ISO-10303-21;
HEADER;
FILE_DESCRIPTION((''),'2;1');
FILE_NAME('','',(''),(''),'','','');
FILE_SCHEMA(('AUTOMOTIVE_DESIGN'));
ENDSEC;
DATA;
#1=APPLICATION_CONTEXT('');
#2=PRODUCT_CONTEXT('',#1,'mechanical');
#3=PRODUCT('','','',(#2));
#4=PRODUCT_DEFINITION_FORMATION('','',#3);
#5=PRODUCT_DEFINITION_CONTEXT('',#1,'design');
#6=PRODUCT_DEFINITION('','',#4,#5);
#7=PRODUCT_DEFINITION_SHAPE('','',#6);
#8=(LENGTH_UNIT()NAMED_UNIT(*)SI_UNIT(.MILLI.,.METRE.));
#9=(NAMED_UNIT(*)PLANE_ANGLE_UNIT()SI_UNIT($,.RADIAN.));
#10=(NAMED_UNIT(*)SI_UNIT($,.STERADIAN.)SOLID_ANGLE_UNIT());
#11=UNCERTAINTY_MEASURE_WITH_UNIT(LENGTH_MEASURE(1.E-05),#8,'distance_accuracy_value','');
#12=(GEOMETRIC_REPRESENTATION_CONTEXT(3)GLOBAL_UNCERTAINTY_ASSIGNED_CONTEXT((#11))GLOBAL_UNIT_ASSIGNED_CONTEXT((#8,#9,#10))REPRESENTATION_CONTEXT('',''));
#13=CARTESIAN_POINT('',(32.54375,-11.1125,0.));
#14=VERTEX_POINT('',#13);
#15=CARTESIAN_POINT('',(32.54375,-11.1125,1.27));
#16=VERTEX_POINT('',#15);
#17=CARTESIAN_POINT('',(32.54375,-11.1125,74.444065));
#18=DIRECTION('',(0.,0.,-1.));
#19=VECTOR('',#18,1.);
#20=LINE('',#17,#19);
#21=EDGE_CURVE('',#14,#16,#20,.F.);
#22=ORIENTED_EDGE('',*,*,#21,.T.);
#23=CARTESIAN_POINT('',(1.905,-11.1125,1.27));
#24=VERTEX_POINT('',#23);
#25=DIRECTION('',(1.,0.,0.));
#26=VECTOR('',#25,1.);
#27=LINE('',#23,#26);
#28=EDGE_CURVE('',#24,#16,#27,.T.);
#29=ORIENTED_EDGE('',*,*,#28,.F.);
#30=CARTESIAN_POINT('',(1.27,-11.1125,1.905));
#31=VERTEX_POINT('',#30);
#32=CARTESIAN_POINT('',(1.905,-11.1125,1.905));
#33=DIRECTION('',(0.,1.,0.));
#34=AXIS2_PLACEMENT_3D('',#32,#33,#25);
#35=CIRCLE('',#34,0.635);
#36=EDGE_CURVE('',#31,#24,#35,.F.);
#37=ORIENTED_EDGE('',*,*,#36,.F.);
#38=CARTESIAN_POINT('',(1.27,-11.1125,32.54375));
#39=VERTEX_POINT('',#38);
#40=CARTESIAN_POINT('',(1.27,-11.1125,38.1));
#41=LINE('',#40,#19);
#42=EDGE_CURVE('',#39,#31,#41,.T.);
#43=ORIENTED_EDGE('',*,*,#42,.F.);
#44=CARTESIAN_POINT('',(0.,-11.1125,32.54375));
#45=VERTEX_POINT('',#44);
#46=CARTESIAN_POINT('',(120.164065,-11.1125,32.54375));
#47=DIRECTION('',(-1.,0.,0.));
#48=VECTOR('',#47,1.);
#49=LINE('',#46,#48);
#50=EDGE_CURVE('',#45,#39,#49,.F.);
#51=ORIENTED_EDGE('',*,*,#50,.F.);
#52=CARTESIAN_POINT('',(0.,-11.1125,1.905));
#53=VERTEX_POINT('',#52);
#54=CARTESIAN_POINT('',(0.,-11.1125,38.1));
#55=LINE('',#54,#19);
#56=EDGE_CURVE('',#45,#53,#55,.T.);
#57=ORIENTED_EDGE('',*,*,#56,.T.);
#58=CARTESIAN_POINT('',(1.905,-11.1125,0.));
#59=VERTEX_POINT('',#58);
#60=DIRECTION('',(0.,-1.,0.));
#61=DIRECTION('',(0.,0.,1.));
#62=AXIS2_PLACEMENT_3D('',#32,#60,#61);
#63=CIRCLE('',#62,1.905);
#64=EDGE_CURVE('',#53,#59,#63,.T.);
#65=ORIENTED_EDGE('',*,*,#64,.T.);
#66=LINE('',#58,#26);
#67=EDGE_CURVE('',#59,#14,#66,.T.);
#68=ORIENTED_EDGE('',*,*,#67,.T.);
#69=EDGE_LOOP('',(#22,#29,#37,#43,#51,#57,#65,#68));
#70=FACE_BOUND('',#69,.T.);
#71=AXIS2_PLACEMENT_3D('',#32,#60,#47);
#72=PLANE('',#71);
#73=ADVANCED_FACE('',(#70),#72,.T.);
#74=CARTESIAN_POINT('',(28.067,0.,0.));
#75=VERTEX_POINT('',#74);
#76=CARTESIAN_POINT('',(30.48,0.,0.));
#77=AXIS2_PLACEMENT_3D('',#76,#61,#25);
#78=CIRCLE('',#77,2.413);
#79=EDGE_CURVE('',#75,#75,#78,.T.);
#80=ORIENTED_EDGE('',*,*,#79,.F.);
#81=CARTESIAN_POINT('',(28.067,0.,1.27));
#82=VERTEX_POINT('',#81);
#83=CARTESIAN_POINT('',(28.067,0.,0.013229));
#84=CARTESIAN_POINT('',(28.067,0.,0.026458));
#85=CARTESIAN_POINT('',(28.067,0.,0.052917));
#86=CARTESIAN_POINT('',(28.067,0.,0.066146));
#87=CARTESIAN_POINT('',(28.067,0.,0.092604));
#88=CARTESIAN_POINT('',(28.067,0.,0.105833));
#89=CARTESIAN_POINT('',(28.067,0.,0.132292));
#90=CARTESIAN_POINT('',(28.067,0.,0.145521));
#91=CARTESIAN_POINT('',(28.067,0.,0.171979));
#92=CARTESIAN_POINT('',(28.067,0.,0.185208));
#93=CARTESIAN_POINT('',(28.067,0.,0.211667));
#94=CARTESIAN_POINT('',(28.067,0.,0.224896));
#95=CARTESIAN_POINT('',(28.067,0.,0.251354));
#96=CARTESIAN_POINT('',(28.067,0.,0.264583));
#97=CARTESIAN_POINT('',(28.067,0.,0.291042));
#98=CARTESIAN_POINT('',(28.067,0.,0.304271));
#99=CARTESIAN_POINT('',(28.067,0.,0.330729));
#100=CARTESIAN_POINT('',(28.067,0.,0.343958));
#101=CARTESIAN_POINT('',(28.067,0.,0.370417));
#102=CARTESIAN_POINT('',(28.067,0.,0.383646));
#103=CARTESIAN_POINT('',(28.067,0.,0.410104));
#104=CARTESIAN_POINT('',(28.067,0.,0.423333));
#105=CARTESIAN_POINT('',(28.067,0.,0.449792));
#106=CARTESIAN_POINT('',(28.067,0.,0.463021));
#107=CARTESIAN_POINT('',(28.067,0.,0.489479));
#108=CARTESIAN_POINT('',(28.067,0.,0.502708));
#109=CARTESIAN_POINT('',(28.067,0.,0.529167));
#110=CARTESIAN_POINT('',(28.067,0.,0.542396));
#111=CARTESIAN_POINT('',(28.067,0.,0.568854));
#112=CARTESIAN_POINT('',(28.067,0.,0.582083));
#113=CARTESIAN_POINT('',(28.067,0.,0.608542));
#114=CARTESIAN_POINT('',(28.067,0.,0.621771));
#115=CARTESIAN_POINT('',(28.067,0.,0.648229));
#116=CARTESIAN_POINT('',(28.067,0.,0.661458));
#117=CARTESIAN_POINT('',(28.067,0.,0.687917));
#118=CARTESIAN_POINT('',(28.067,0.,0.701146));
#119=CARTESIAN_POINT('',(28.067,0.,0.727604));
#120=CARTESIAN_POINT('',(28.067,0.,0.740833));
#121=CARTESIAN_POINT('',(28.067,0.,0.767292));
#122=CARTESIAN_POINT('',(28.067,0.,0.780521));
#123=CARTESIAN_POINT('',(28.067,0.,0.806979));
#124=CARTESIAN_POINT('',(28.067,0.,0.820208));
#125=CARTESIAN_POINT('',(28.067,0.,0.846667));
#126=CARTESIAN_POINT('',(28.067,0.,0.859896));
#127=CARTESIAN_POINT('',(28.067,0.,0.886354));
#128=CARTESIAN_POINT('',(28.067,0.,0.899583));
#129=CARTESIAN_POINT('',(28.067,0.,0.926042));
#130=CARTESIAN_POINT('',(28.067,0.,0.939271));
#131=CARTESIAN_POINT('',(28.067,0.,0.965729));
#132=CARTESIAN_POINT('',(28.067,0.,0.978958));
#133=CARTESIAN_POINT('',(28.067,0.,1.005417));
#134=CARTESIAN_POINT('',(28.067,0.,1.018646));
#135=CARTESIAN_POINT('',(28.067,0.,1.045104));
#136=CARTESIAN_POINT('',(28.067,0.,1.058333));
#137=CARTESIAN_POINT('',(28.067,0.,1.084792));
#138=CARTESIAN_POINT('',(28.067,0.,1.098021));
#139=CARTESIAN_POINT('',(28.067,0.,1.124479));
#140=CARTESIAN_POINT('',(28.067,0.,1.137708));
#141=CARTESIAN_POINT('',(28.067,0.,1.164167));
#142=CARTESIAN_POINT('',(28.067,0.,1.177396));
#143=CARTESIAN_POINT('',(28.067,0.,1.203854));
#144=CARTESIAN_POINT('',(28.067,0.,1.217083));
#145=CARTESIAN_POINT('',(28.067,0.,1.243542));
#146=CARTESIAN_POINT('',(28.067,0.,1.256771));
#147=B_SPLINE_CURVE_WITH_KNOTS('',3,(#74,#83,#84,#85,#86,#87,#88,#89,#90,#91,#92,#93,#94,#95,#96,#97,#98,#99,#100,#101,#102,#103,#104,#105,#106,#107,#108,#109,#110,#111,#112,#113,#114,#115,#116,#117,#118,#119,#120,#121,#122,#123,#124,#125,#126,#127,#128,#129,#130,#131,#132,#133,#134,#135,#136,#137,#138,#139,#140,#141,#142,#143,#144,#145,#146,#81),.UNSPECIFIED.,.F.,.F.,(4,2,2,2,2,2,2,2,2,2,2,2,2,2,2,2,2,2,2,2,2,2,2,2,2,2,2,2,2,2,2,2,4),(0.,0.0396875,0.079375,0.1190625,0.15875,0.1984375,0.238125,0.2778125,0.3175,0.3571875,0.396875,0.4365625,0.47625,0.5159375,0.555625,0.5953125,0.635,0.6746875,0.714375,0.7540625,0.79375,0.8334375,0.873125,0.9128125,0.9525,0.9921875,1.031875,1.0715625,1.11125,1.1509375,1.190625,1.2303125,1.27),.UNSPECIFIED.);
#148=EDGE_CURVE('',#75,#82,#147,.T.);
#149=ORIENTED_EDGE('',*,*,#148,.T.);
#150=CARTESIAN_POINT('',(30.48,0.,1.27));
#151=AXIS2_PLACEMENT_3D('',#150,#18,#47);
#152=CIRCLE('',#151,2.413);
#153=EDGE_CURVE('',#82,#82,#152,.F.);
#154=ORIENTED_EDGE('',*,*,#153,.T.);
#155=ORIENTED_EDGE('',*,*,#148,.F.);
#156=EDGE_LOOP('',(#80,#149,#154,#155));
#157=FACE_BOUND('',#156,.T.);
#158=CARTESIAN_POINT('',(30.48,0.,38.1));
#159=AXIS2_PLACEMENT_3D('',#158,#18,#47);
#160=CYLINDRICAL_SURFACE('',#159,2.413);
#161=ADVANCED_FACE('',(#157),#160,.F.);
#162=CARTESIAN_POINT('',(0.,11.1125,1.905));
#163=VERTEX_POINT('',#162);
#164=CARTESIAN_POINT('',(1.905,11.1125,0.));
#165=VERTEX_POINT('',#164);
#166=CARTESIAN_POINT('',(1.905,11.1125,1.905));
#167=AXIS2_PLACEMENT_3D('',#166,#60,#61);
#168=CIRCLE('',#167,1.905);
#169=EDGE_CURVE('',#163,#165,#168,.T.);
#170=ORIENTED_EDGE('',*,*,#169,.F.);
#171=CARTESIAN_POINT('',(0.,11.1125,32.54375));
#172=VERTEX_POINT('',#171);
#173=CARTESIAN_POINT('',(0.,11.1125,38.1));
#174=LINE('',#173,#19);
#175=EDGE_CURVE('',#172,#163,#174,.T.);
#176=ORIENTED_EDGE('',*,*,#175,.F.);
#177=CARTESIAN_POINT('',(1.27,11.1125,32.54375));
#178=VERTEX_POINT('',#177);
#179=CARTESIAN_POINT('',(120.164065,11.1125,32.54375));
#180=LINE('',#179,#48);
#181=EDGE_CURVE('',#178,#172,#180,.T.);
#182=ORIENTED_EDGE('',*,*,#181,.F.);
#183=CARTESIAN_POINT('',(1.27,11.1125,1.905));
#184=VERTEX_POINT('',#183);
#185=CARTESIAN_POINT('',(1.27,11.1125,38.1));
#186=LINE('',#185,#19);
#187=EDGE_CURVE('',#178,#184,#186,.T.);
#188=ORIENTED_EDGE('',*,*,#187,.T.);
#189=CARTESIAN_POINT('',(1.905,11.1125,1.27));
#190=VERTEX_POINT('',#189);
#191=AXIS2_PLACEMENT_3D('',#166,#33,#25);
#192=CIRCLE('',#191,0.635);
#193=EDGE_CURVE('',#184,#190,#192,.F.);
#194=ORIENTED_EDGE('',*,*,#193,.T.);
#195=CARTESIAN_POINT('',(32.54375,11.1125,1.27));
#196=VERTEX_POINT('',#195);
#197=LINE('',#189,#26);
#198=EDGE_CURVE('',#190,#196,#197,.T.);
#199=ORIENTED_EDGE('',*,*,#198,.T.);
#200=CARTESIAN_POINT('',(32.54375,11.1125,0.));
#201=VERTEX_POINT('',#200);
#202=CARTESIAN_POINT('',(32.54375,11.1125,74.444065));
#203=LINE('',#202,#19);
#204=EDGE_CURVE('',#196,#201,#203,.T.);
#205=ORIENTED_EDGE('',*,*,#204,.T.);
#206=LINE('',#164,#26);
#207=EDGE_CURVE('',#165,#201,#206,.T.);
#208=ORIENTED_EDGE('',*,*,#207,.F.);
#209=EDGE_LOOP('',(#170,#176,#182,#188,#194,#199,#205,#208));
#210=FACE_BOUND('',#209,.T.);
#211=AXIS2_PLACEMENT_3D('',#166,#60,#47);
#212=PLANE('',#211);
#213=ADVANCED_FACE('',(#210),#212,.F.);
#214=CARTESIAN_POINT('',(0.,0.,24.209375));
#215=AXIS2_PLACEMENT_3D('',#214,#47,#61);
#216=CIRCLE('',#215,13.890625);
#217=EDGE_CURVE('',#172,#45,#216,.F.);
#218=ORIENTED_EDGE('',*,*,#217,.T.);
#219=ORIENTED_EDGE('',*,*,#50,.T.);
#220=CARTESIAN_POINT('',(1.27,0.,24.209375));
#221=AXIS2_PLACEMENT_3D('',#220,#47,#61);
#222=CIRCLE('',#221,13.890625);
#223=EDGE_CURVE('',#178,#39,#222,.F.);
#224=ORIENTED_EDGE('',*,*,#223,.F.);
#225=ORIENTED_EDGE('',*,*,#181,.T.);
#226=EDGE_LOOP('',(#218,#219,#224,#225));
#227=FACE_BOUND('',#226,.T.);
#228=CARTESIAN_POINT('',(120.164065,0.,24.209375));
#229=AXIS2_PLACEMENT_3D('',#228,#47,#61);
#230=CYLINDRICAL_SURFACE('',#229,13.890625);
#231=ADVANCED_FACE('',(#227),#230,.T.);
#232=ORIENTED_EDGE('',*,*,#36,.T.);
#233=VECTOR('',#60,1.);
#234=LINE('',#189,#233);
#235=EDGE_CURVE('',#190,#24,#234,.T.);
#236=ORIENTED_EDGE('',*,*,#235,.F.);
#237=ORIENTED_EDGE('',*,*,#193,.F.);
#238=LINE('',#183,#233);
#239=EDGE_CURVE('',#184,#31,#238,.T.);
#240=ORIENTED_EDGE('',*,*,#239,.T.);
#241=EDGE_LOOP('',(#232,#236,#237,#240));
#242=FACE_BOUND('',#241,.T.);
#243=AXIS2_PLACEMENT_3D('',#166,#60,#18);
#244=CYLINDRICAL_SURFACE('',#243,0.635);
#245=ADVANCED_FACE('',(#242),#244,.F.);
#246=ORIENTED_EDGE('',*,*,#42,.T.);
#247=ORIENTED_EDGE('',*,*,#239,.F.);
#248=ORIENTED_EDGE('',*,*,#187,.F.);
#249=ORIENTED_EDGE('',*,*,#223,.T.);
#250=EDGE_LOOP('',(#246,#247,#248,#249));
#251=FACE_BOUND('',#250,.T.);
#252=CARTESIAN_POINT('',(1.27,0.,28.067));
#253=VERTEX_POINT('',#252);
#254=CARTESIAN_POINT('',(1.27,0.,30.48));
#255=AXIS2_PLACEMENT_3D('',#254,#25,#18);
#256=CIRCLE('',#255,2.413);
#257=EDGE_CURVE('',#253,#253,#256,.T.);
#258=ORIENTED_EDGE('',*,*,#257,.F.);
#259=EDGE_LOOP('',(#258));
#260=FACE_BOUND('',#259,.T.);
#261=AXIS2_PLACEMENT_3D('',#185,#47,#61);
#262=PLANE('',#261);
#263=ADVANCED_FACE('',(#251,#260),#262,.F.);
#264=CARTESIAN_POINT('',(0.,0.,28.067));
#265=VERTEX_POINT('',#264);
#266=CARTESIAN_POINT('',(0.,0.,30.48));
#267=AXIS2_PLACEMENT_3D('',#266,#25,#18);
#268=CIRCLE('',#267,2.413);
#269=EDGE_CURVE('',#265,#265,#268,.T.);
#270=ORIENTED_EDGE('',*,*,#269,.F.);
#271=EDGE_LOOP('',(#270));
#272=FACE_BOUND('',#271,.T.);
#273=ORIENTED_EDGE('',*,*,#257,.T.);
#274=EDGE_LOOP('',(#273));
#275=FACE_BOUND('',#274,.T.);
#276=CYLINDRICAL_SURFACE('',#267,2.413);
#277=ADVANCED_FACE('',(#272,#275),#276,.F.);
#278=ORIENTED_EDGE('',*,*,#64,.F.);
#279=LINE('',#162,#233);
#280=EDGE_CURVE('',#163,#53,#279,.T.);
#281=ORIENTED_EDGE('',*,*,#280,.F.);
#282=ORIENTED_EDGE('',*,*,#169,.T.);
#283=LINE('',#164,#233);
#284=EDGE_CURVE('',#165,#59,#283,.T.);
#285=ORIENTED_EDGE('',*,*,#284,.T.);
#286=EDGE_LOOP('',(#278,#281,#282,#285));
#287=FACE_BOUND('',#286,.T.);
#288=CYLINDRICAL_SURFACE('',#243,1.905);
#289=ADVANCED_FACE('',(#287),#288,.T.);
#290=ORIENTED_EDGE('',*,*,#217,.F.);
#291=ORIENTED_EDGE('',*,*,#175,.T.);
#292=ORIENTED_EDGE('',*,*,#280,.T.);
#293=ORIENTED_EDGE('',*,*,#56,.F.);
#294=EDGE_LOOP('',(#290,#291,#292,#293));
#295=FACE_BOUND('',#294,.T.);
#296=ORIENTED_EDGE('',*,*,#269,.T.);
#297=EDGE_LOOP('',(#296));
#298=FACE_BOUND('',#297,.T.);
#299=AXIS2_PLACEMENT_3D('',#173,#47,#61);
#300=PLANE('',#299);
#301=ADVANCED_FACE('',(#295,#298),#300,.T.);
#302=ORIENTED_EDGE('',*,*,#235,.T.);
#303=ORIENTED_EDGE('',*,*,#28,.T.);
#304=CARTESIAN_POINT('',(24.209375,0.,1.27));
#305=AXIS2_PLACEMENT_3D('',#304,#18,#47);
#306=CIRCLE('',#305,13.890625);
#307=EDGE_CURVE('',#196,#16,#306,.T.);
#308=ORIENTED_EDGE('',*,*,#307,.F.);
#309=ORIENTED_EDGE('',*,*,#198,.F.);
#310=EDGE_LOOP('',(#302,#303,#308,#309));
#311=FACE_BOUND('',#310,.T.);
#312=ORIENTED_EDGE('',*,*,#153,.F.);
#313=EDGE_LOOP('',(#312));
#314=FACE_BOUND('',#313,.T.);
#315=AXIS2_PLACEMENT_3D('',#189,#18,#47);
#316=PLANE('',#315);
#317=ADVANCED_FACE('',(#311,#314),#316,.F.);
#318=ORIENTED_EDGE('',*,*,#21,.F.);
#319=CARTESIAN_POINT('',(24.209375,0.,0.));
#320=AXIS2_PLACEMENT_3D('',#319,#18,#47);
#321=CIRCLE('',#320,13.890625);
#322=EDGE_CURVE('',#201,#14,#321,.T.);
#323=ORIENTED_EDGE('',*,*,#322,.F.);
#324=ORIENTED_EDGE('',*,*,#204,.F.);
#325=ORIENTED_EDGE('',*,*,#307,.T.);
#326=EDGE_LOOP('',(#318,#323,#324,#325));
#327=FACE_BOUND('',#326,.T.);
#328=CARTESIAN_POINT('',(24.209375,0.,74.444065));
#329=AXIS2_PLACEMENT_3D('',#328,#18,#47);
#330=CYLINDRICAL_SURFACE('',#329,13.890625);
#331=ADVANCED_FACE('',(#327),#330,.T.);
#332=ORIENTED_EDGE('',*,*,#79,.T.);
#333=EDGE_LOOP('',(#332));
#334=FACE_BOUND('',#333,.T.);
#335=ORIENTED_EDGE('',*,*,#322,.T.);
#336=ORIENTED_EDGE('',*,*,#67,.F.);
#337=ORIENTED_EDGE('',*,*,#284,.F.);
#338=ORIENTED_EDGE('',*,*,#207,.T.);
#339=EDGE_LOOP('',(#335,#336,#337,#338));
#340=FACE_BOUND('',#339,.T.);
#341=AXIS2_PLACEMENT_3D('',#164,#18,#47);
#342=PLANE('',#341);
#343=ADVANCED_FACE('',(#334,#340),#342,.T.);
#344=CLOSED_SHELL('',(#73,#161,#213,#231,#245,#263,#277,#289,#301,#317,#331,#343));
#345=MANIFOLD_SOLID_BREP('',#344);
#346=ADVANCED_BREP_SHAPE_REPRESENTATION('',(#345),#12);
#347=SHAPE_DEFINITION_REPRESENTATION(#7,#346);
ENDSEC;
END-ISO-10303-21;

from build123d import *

# Parameters (mm, degrees)
EXTRUDE_THIN1_START     = -11.1125
EXTRUDE_THIN1_DEPTH     = 22.225
SKETCH4_R               = 2.413
EXTRUDE3_DEPTH          = 55.143758239
SKETCH6_R               = 2.413
CUT_EXTRUDE1_DEPTH      = 56.015521957
CUT_EXTRUDE2_DEPTH      = 55.143758239
CUT_EXTRUDE2_DEPTH_BACK = 55.143758239
CUT_EXTRUDE3_DEPTH      = 56.015521957
CUT_EXTRUDE3_DEPTH_BACK = 56.015521957


# Read off the part's stored shape, not the designer's step: Extrude-Thin1
with BuildPart() as part:
    # Extrude-Thin1 outline → Extrude-Thin1 (new body)
    with BuildSketch(Plane(origin=(0, 0, 0), x_dir=(1, 0, 0), z_dir=(0, 1, 0)).offset(EXTRUDE_THIN1_START)):
        with BuildLine():
            Line((1.905, -1.27), (38.1, -1.27))
            Line((38.1, -1.27), (38.1, 0))
            Line((38.1, 0), (1.905, 0))
            ThreePointArc((1.905, 0), (0.557961582, -0.557961582), (0, -1.905))
            Line((0, -1.905), (0, -38.1))
            Line((0, -38.1), (1.27, -38.1))
            Line((1.27, -38.1), (1.27, -1.905))
            ThreePointArc((1.27, -1.905), (1.455987194, -1.455987194), (1.905, -1.27))
        make_face()
    extrude(amount=EXTRUDE_THIN1_DEPTH)

    # Sketch4 → Extrude3 (cut, through all)
    with BuildSketch(Plane(origin=(1.27, 0, 0), x_dir=(0, 0, -1), z_dir=(1, 0, 0))):
        with Locations((-30.48, 0)):
            Circle(SKETCH4_R)
    extrude(amount=-EXTRUDE3_DEPTH, mode=Mode.SUBTRACT)

    # Sketch6 → Cut-Extrude1 (cut, through all)
    with BuildSketch(Plane.XY):
        with Locations(Location((30.48, 0, 0), (0, 0, 180))):
            Circle(SKETCH6_R)
    extrude(amount=CUT_EXTRUDE1_DEPTH, mode=Mode.SUBTRACT)

    # Sketch8 → Cut-Extrude2 (cut, two sides: drawn at the far end of the back side and taken through both)
    with BuildSketch(Plane(origin=(1.27, 0, 0), x_dir=(0, 0, -1), z_dir=(1, 0, 0)).offset(-CUT_EXTRUDE2_DEPTH_BACK)):
        with BuildLine():
            Line((38.510183264, 64.402949948), (-32.54375, 11.1125))
            ThreePointArc((-32.54375, 11.1125), (-38.1, 0), (-32.54375, -11.1125))
            Line((-32.54375, -11.1125), (38.510183264, -64.402949948))
            Line((38.510183264, -64.402949948), (-139.124649895, -64.402949948))
            Line((-139.124649895, -64.402949948), (-139.124649895, 64.402949948))
            Line((-139.124649895, 64.402949948), (38.510183264, 64.402949948))
        make_face()
    extrude(amount=CUT_EXTRUDE2_DEPTH + CUT_EXTRUDE2_DEPTH_BACK, mode=Mode.SUBTRACT)

    # Sketch9 → Cut-Extrude3 (cut, two sides: drawn at the far end of the back side and taken through both)
    with BuildSketch(Plane.XY.offset(-CUT_EXTRUDE3_DEPTH_BACK)):
        with BuildLine():
            Line((-38.510183264, 64.402949948), (32.54375, 11.1125))
            ThreePointArc((32.54375, 11.1125), (38.1, 0), (32.54375, -11.1125))
            Line((32.54375, -11.1125), (-38.510183264, -64.402949948))
            Line((-38.510183264, -64.402949948), (139.124649895, -64.402949948))
            Line((139.124649895, -64.402949948), (139.124649895, 64.402949948))
            Line((139.124649895, 64.402949948), (-38.510183264, 64.402949948))
        make_face()
    extrude(amount=CUT_EXTRUDE3_DEPTH + CUT_EXTRUDE3_DEPTH_BACK, mode=Mode.SUBTRACT)


solid = part.part
